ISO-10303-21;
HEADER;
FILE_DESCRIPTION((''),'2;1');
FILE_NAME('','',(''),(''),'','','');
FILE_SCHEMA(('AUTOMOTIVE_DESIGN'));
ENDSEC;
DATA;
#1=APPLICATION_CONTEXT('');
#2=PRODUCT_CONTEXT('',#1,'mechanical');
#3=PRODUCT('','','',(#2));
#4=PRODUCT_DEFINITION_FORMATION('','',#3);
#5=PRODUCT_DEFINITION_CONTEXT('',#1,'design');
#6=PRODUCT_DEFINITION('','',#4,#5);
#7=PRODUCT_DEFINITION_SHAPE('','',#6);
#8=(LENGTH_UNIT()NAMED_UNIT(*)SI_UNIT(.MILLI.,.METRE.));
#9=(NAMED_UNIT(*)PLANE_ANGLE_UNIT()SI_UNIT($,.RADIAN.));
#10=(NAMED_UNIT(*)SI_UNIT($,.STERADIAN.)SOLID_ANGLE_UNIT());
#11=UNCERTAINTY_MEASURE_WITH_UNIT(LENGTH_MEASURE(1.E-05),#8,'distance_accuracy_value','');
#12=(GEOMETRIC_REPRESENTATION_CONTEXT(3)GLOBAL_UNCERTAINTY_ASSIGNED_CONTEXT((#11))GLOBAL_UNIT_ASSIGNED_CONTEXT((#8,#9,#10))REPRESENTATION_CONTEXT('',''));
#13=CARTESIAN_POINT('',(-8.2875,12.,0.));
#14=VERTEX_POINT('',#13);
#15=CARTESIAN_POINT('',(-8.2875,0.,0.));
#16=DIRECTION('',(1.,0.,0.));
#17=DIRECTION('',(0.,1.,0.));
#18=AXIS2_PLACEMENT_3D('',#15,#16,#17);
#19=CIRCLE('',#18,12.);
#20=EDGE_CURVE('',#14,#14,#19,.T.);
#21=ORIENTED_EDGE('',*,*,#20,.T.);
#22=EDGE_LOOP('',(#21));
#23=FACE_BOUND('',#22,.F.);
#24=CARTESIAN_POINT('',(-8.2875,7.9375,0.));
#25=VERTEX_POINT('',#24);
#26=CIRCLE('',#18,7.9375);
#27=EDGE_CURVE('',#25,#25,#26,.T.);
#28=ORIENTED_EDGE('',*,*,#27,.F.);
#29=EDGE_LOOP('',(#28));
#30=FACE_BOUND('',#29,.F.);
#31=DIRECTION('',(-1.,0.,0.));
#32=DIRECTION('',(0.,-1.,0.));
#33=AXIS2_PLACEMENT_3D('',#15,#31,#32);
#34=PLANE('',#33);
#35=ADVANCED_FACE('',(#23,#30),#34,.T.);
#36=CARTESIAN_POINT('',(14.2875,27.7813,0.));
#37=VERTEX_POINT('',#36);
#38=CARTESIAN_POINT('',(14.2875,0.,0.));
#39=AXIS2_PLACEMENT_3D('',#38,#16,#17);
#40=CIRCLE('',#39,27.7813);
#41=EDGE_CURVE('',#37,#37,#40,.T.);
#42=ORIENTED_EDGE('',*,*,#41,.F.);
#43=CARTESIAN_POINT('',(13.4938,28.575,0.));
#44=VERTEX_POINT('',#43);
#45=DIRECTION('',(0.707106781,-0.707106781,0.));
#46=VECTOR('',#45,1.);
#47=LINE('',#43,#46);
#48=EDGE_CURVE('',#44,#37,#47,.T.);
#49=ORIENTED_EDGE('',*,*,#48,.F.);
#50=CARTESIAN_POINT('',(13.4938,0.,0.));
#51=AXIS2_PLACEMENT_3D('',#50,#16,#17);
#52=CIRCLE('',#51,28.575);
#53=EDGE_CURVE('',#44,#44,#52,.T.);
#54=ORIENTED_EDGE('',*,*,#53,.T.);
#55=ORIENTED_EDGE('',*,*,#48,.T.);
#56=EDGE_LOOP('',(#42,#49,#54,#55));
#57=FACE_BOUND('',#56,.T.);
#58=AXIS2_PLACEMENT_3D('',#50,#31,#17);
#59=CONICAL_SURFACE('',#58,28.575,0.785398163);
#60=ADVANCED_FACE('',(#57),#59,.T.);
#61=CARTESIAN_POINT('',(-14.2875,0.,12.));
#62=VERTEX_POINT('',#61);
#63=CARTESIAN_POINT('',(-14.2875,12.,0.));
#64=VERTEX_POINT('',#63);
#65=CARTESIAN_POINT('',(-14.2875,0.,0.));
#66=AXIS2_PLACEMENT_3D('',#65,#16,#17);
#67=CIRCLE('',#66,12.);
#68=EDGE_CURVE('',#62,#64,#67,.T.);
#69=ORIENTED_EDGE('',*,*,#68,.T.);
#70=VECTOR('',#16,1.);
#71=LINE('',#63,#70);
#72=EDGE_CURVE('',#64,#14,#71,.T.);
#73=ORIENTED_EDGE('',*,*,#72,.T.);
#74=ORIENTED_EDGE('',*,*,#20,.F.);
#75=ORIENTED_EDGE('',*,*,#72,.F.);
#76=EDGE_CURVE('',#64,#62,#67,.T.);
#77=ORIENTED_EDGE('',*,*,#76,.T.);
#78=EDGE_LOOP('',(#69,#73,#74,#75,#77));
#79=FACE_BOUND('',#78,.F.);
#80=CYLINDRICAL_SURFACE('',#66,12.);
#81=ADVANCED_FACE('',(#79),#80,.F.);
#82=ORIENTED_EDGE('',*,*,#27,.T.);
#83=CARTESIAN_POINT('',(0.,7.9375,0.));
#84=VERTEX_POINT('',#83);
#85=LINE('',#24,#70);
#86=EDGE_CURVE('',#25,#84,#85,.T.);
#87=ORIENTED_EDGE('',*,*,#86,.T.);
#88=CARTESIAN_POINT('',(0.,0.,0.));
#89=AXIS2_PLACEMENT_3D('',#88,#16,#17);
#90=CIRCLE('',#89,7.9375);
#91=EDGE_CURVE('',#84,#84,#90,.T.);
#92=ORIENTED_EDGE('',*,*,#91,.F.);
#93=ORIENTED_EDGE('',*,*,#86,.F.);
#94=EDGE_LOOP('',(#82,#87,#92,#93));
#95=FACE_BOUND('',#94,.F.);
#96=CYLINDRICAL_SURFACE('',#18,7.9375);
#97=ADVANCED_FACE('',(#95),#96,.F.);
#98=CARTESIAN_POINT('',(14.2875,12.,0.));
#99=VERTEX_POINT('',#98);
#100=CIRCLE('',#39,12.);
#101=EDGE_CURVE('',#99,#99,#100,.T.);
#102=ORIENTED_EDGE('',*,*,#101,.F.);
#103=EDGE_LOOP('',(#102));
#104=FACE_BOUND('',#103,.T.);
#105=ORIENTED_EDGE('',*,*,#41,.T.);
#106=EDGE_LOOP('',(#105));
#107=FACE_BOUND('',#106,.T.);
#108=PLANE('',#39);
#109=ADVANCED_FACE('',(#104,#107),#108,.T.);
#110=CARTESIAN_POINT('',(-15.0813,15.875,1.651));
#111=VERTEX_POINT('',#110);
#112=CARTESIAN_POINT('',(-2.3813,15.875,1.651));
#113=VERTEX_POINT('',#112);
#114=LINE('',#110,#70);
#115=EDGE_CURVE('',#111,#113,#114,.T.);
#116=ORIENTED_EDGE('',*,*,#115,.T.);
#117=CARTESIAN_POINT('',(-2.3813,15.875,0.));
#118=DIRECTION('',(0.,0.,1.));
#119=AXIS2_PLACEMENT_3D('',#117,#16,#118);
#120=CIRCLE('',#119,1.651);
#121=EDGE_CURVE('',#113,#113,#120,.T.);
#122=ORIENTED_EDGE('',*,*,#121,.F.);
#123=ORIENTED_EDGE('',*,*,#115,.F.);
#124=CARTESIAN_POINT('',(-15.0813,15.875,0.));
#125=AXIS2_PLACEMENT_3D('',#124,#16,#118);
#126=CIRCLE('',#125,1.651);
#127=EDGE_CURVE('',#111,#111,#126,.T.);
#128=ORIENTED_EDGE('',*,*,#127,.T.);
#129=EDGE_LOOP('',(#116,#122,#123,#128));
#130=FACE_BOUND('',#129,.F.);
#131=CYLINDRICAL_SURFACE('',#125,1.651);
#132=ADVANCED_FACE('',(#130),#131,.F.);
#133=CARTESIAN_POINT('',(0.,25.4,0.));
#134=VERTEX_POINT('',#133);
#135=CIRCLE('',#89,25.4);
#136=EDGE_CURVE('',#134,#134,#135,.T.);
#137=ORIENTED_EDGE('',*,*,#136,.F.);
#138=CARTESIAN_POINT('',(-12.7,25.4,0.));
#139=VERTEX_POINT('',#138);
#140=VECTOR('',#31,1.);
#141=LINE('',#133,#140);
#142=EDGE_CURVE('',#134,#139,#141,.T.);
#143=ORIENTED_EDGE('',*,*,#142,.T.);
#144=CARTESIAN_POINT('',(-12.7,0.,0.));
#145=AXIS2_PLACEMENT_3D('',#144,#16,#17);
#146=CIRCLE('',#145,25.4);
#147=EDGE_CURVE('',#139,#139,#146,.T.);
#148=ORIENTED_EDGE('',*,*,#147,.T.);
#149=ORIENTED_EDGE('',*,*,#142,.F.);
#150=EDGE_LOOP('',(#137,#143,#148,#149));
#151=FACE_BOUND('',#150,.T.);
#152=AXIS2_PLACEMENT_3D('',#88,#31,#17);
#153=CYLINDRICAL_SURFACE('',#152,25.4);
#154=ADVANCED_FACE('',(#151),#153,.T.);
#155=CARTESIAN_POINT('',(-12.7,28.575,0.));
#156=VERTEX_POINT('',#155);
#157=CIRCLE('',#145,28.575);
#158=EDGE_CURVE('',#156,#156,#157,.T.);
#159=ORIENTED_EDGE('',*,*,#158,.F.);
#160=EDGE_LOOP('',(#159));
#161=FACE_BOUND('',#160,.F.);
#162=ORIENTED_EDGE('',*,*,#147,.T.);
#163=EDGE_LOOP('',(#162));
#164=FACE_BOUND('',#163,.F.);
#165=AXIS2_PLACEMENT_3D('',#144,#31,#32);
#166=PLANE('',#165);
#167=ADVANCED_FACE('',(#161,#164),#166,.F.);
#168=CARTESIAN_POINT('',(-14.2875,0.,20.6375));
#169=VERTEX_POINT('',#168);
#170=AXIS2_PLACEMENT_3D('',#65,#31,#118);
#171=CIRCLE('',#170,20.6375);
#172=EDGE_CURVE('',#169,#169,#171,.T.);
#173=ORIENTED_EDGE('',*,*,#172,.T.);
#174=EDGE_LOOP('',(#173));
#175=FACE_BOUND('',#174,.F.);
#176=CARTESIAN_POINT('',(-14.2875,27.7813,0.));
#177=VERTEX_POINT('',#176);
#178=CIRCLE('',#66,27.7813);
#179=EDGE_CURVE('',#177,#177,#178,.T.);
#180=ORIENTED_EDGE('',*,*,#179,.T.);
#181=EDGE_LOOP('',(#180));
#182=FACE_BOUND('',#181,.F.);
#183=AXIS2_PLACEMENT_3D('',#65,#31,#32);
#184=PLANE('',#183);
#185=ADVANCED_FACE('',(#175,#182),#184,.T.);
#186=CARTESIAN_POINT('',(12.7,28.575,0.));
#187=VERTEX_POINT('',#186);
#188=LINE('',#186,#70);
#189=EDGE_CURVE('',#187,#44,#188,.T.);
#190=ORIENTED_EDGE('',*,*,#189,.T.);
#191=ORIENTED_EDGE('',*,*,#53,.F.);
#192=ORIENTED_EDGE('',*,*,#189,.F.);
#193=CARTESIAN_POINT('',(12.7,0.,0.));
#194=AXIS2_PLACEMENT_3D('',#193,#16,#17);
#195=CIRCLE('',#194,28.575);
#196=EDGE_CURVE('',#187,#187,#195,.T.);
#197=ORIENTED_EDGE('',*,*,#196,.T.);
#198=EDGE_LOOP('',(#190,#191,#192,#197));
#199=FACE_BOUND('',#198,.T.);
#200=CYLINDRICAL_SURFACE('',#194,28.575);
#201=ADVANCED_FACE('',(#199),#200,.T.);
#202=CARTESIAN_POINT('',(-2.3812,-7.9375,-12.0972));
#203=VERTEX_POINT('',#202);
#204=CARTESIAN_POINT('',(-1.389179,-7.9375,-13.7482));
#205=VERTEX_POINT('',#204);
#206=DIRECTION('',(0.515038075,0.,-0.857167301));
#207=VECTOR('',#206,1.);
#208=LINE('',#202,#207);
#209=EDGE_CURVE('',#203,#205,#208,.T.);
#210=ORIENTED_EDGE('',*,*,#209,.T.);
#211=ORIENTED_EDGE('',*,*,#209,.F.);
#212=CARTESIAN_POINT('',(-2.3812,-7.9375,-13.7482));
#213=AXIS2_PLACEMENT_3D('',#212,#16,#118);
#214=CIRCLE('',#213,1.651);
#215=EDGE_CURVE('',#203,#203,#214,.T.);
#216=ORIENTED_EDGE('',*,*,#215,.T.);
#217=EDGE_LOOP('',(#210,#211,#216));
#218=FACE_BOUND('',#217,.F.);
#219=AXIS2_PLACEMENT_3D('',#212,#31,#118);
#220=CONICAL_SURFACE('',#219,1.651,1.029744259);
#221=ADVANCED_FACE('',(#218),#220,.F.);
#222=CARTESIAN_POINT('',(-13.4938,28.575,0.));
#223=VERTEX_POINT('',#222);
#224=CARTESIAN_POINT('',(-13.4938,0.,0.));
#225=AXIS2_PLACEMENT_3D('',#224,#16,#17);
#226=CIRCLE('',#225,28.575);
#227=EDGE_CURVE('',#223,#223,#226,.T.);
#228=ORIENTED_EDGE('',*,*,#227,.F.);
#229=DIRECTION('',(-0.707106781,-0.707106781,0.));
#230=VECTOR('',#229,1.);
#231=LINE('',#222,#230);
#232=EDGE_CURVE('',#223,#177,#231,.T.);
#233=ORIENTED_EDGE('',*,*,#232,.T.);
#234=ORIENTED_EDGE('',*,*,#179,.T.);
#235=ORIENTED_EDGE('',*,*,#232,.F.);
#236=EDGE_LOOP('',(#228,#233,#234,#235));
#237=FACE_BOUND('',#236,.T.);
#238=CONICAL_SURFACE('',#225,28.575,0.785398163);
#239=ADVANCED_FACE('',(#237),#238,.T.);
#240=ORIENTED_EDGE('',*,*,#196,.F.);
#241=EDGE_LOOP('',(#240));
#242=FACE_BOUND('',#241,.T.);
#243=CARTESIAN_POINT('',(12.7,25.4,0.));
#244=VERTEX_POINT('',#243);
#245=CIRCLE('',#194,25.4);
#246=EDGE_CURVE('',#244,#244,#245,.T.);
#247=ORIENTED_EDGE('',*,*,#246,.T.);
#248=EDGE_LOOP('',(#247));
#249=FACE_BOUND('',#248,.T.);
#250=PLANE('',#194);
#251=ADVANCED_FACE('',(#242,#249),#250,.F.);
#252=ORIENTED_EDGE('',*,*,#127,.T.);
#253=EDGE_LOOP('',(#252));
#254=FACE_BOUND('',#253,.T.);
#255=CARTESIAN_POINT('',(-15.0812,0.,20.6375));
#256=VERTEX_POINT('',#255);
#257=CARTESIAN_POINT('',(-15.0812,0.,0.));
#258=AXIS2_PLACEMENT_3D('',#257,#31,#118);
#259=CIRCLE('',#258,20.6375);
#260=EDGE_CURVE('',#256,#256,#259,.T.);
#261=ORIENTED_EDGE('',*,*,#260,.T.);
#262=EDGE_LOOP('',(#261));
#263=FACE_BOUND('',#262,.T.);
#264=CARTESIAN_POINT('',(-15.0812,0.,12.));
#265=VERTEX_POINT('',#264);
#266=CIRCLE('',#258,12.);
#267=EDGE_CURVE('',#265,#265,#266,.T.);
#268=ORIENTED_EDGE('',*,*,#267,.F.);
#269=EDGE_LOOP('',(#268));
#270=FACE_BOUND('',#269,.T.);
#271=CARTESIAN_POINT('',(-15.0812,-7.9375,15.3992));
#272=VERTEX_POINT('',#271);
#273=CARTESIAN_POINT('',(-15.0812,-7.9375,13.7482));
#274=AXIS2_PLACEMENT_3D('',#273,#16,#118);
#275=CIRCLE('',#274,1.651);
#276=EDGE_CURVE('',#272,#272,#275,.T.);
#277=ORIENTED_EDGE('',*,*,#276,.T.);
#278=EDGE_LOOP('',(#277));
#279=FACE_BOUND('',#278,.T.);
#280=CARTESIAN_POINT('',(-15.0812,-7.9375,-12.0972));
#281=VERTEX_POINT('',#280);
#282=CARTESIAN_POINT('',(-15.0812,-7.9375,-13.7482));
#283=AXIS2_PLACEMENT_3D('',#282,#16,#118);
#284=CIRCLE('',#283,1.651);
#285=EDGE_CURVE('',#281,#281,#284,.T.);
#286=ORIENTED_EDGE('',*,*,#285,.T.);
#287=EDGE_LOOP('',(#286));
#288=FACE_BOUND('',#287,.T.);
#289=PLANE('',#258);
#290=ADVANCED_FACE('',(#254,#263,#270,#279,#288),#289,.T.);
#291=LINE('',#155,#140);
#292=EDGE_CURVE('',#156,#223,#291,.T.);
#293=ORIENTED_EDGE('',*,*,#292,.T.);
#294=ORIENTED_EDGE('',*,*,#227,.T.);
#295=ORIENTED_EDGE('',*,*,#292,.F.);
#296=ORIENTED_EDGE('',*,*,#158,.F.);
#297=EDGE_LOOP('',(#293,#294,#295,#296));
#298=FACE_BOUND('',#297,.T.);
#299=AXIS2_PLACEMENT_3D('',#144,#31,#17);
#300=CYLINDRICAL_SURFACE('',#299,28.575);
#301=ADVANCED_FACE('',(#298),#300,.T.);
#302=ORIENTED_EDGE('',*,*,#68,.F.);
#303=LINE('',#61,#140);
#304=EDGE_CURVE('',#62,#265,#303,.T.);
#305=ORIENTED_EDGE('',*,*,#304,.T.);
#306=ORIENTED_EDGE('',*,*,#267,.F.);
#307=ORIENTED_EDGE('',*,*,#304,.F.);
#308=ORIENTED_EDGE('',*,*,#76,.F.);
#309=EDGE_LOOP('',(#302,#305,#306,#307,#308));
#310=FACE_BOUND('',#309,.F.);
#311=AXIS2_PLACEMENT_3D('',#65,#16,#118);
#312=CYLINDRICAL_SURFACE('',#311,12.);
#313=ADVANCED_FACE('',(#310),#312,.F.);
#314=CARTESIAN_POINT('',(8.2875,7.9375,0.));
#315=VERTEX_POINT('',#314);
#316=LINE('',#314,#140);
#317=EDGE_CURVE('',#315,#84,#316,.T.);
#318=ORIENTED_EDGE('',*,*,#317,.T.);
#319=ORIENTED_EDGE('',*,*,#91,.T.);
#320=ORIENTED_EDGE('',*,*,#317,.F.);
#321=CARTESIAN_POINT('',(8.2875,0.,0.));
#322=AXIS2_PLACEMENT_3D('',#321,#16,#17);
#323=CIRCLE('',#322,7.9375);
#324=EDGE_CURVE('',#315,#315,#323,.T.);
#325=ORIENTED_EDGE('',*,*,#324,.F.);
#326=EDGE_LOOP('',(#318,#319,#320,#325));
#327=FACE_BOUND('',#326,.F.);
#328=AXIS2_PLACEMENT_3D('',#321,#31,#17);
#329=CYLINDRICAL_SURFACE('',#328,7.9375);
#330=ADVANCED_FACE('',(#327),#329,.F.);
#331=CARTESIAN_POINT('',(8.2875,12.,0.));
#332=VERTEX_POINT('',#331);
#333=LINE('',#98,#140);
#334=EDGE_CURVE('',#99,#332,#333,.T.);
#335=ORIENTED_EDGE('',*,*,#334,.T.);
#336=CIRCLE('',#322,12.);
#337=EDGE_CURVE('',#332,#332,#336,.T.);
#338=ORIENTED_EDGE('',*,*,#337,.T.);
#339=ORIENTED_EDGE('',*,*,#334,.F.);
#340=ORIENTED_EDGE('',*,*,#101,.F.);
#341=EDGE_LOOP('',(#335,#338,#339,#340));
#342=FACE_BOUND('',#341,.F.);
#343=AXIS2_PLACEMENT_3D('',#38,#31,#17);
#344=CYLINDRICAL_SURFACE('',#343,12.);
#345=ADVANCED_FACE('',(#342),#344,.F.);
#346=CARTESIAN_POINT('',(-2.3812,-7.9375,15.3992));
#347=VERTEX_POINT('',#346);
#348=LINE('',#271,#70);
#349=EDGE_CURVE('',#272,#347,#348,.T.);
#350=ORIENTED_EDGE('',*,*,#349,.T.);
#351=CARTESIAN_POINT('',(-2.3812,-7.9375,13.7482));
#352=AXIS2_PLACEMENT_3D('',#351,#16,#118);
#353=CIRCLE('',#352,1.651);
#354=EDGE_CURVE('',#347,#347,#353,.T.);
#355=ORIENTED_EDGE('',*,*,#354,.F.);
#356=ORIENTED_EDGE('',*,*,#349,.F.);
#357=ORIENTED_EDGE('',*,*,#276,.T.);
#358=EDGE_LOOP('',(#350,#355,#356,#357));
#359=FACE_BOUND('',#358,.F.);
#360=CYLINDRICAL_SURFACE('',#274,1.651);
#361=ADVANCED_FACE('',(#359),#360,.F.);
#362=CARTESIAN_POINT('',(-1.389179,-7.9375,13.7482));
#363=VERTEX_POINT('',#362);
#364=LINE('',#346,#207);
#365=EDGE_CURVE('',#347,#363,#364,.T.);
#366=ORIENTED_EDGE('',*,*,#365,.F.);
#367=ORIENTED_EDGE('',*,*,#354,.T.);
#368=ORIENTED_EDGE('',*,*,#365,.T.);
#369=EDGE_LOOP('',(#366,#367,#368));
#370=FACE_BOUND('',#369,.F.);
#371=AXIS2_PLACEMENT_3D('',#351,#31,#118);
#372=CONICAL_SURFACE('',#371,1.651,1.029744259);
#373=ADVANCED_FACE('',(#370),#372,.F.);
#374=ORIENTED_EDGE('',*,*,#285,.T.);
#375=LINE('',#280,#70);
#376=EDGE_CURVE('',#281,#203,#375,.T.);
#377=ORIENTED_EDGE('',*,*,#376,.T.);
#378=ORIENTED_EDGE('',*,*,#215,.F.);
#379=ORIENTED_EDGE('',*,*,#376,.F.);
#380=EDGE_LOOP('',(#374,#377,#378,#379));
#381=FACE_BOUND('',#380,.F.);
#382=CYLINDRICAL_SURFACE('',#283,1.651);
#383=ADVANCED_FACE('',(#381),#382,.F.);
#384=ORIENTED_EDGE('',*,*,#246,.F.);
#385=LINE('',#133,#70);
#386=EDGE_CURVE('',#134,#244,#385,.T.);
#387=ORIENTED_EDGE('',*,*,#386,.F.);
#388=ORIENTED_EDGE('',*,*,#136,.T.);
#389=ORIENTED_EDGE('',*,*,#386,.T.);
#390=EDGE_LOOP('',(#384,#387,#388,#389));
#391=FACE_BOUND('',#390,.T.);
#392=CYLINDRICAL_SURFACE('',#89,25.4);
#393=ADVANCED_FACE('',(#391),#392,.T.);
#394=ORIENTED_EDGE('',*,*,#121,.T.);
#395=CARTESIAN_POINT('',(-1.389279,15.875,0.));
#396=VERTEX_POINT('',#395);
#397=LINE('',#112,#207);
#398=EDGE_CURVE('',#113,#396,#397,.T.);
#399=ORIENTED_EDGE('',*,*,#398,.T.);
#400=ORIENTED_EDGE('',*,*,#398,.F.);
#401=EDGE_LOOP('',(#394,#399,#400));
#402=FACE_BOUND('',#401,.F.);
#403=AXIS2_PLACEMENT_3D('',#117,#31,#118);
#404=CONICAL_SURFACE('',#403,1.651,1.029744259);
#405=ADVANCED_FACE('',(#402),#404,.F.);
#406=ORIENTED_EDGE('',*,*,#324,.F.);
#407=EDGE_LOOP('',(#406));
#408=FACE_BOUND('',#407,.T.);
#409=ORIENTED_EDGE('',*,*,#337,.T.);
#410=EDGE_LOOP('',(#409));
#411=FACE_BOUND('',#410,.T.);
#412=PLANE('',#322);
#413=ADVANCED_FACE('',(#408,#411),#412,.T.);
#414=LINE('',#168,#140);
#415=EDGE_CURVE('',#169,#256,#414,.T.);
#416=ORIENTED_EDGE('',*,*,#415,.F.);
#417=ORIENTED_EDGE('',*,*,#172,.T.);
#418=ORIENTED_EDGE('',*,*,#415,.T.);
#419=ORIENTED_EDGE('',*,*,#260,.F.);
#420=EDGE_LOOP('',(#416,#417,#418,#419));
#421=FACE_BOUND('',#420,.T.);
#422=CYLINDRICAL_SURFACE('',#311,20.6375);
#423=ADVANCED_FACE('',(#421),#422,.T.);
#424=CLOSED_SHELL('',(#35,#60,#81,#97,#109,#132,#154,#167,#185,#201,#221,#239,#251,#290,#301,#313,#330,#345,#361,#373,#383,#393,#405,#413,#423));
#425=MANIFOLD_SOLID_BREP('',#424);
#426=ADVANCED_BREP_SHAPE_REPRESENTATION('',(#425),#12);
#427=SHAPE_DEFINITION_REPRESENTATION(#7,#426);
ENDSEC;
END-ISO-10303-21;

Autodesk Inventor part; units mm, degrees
ref_plane "YZ Plane" through (0, 0, 0) normal (1, 0, 0) x (0, 1, 0)
ref_plane "XZ Plane" through (0, 0, 0) normal (0, 1, 0) x (-1, 0, 0)
ref_plane "XY Plane" through (0, 0, 0) normal (0, 0, 1) x (1, 0, 0)
sketch "Sketch1" plane through (0, 0, 0) normal (0, 0, 1) x (1, 0, 0)
  line L0 (0, 0) -> (0, 7.9375) construction
  line L1 (0, 25.4) -> (12.7, 25.4)
  line L2 (12.7, 25.4) -> (12.7, 28.575)
  line L3 (12.7, 28.575) -> (14.2875, 28.575)
  line L4 (14.2875, 28.575) -> (14.2875, 12)
  line L5 (14.2875, 12) -> (8.2875, 12)
  line L6 (8.2875, 12) -> (8.2875, 7.9375)
  line L7 (8.2875, 7.9375) -> (0, 7.9375)
  line L8 (0, 0) -> (14.2875, 0) construction
  line L9 (14.2875, 0) -> (14.2875, 12) construction
  line L10 (0, 7.9375) -> (0, 25.4)
  dimension "d3" = 25.4
  dimension "d4" = 28.575
  dimension "d5" = 12
  dimension "d6" = 7.9375
  dimension "d7" = 6
  dimension "d8" = 14.2875
  dimension "d9" = 1.5875
revolve "Revolution1" add sketch "Sketch1" angle 360 about axis through (0, 0, 0) along (1, 0, 0)
mirror "Mirror1" about plane through (0, 25.4, 0) normal (-1, 0, 0)
sketch "Sketch2" plane through (-14.2875, 0, 0) normal (-1, 0, 0) x (0, 0, 1)
  circle A0 centre (0, 0) radius 12 projected
  circle A1 centre (0, 0) radius 28.575 projected
  circle A2 centre (0, 0) radius 15.875 construction
  line L0 (0, 0) -> (0, 15.875) construction
  circle A3 centre (0, 15.875) radius 2.54 construction
  circle A4 centre (-13.7482, -7.9375) radius 2.54 construction
  circle A5 centre (13.7482, -7.9375) radius 2.54 construction
  circle A6 centre (0, 0) radius 20.6375
  point P0 (0, 13.335)
  point P1 (0, 12)
  dimension "d11" = 5.08
  dimension "d27" = 31.75
  dimension "d15" = 360
  dimension "d28" = 5.08
  dimension "d29" = 5.08
  dimension "d40" = 41.275
chamfer "Chamfer1" distance 0.7937 angle 45 2 edges at (-14.2875, -28.575, 0) (14.2875, -28.575, 0)
extrude "Extrusion2" add sketch "Sketch2" along normal blind 0.7937 contours A6
sketch "Sketch4" plane through (-15.0812, 0, 0) normal (-1, 0, 0) x (0, 0, 1)
  point P0 (0, 15.875)
  point P1 (-13.7482, -7.9375)
  point P2 (13.7482, -7.9375)
hole "Hole3" at (-15.0812, -7.9375, 13.7482) at (-15.0812, -7.9375, -13.7482) at (-15.0813, 15.875, 0) direction (1, 0, 0) diameter 3.302 depth 12.7 tip angle 118 thread size "8-32 UNC" class "2B" standard "ANSI Unified Screw Threads"
properties part number "Wheel" material "Aluminum 6061"
